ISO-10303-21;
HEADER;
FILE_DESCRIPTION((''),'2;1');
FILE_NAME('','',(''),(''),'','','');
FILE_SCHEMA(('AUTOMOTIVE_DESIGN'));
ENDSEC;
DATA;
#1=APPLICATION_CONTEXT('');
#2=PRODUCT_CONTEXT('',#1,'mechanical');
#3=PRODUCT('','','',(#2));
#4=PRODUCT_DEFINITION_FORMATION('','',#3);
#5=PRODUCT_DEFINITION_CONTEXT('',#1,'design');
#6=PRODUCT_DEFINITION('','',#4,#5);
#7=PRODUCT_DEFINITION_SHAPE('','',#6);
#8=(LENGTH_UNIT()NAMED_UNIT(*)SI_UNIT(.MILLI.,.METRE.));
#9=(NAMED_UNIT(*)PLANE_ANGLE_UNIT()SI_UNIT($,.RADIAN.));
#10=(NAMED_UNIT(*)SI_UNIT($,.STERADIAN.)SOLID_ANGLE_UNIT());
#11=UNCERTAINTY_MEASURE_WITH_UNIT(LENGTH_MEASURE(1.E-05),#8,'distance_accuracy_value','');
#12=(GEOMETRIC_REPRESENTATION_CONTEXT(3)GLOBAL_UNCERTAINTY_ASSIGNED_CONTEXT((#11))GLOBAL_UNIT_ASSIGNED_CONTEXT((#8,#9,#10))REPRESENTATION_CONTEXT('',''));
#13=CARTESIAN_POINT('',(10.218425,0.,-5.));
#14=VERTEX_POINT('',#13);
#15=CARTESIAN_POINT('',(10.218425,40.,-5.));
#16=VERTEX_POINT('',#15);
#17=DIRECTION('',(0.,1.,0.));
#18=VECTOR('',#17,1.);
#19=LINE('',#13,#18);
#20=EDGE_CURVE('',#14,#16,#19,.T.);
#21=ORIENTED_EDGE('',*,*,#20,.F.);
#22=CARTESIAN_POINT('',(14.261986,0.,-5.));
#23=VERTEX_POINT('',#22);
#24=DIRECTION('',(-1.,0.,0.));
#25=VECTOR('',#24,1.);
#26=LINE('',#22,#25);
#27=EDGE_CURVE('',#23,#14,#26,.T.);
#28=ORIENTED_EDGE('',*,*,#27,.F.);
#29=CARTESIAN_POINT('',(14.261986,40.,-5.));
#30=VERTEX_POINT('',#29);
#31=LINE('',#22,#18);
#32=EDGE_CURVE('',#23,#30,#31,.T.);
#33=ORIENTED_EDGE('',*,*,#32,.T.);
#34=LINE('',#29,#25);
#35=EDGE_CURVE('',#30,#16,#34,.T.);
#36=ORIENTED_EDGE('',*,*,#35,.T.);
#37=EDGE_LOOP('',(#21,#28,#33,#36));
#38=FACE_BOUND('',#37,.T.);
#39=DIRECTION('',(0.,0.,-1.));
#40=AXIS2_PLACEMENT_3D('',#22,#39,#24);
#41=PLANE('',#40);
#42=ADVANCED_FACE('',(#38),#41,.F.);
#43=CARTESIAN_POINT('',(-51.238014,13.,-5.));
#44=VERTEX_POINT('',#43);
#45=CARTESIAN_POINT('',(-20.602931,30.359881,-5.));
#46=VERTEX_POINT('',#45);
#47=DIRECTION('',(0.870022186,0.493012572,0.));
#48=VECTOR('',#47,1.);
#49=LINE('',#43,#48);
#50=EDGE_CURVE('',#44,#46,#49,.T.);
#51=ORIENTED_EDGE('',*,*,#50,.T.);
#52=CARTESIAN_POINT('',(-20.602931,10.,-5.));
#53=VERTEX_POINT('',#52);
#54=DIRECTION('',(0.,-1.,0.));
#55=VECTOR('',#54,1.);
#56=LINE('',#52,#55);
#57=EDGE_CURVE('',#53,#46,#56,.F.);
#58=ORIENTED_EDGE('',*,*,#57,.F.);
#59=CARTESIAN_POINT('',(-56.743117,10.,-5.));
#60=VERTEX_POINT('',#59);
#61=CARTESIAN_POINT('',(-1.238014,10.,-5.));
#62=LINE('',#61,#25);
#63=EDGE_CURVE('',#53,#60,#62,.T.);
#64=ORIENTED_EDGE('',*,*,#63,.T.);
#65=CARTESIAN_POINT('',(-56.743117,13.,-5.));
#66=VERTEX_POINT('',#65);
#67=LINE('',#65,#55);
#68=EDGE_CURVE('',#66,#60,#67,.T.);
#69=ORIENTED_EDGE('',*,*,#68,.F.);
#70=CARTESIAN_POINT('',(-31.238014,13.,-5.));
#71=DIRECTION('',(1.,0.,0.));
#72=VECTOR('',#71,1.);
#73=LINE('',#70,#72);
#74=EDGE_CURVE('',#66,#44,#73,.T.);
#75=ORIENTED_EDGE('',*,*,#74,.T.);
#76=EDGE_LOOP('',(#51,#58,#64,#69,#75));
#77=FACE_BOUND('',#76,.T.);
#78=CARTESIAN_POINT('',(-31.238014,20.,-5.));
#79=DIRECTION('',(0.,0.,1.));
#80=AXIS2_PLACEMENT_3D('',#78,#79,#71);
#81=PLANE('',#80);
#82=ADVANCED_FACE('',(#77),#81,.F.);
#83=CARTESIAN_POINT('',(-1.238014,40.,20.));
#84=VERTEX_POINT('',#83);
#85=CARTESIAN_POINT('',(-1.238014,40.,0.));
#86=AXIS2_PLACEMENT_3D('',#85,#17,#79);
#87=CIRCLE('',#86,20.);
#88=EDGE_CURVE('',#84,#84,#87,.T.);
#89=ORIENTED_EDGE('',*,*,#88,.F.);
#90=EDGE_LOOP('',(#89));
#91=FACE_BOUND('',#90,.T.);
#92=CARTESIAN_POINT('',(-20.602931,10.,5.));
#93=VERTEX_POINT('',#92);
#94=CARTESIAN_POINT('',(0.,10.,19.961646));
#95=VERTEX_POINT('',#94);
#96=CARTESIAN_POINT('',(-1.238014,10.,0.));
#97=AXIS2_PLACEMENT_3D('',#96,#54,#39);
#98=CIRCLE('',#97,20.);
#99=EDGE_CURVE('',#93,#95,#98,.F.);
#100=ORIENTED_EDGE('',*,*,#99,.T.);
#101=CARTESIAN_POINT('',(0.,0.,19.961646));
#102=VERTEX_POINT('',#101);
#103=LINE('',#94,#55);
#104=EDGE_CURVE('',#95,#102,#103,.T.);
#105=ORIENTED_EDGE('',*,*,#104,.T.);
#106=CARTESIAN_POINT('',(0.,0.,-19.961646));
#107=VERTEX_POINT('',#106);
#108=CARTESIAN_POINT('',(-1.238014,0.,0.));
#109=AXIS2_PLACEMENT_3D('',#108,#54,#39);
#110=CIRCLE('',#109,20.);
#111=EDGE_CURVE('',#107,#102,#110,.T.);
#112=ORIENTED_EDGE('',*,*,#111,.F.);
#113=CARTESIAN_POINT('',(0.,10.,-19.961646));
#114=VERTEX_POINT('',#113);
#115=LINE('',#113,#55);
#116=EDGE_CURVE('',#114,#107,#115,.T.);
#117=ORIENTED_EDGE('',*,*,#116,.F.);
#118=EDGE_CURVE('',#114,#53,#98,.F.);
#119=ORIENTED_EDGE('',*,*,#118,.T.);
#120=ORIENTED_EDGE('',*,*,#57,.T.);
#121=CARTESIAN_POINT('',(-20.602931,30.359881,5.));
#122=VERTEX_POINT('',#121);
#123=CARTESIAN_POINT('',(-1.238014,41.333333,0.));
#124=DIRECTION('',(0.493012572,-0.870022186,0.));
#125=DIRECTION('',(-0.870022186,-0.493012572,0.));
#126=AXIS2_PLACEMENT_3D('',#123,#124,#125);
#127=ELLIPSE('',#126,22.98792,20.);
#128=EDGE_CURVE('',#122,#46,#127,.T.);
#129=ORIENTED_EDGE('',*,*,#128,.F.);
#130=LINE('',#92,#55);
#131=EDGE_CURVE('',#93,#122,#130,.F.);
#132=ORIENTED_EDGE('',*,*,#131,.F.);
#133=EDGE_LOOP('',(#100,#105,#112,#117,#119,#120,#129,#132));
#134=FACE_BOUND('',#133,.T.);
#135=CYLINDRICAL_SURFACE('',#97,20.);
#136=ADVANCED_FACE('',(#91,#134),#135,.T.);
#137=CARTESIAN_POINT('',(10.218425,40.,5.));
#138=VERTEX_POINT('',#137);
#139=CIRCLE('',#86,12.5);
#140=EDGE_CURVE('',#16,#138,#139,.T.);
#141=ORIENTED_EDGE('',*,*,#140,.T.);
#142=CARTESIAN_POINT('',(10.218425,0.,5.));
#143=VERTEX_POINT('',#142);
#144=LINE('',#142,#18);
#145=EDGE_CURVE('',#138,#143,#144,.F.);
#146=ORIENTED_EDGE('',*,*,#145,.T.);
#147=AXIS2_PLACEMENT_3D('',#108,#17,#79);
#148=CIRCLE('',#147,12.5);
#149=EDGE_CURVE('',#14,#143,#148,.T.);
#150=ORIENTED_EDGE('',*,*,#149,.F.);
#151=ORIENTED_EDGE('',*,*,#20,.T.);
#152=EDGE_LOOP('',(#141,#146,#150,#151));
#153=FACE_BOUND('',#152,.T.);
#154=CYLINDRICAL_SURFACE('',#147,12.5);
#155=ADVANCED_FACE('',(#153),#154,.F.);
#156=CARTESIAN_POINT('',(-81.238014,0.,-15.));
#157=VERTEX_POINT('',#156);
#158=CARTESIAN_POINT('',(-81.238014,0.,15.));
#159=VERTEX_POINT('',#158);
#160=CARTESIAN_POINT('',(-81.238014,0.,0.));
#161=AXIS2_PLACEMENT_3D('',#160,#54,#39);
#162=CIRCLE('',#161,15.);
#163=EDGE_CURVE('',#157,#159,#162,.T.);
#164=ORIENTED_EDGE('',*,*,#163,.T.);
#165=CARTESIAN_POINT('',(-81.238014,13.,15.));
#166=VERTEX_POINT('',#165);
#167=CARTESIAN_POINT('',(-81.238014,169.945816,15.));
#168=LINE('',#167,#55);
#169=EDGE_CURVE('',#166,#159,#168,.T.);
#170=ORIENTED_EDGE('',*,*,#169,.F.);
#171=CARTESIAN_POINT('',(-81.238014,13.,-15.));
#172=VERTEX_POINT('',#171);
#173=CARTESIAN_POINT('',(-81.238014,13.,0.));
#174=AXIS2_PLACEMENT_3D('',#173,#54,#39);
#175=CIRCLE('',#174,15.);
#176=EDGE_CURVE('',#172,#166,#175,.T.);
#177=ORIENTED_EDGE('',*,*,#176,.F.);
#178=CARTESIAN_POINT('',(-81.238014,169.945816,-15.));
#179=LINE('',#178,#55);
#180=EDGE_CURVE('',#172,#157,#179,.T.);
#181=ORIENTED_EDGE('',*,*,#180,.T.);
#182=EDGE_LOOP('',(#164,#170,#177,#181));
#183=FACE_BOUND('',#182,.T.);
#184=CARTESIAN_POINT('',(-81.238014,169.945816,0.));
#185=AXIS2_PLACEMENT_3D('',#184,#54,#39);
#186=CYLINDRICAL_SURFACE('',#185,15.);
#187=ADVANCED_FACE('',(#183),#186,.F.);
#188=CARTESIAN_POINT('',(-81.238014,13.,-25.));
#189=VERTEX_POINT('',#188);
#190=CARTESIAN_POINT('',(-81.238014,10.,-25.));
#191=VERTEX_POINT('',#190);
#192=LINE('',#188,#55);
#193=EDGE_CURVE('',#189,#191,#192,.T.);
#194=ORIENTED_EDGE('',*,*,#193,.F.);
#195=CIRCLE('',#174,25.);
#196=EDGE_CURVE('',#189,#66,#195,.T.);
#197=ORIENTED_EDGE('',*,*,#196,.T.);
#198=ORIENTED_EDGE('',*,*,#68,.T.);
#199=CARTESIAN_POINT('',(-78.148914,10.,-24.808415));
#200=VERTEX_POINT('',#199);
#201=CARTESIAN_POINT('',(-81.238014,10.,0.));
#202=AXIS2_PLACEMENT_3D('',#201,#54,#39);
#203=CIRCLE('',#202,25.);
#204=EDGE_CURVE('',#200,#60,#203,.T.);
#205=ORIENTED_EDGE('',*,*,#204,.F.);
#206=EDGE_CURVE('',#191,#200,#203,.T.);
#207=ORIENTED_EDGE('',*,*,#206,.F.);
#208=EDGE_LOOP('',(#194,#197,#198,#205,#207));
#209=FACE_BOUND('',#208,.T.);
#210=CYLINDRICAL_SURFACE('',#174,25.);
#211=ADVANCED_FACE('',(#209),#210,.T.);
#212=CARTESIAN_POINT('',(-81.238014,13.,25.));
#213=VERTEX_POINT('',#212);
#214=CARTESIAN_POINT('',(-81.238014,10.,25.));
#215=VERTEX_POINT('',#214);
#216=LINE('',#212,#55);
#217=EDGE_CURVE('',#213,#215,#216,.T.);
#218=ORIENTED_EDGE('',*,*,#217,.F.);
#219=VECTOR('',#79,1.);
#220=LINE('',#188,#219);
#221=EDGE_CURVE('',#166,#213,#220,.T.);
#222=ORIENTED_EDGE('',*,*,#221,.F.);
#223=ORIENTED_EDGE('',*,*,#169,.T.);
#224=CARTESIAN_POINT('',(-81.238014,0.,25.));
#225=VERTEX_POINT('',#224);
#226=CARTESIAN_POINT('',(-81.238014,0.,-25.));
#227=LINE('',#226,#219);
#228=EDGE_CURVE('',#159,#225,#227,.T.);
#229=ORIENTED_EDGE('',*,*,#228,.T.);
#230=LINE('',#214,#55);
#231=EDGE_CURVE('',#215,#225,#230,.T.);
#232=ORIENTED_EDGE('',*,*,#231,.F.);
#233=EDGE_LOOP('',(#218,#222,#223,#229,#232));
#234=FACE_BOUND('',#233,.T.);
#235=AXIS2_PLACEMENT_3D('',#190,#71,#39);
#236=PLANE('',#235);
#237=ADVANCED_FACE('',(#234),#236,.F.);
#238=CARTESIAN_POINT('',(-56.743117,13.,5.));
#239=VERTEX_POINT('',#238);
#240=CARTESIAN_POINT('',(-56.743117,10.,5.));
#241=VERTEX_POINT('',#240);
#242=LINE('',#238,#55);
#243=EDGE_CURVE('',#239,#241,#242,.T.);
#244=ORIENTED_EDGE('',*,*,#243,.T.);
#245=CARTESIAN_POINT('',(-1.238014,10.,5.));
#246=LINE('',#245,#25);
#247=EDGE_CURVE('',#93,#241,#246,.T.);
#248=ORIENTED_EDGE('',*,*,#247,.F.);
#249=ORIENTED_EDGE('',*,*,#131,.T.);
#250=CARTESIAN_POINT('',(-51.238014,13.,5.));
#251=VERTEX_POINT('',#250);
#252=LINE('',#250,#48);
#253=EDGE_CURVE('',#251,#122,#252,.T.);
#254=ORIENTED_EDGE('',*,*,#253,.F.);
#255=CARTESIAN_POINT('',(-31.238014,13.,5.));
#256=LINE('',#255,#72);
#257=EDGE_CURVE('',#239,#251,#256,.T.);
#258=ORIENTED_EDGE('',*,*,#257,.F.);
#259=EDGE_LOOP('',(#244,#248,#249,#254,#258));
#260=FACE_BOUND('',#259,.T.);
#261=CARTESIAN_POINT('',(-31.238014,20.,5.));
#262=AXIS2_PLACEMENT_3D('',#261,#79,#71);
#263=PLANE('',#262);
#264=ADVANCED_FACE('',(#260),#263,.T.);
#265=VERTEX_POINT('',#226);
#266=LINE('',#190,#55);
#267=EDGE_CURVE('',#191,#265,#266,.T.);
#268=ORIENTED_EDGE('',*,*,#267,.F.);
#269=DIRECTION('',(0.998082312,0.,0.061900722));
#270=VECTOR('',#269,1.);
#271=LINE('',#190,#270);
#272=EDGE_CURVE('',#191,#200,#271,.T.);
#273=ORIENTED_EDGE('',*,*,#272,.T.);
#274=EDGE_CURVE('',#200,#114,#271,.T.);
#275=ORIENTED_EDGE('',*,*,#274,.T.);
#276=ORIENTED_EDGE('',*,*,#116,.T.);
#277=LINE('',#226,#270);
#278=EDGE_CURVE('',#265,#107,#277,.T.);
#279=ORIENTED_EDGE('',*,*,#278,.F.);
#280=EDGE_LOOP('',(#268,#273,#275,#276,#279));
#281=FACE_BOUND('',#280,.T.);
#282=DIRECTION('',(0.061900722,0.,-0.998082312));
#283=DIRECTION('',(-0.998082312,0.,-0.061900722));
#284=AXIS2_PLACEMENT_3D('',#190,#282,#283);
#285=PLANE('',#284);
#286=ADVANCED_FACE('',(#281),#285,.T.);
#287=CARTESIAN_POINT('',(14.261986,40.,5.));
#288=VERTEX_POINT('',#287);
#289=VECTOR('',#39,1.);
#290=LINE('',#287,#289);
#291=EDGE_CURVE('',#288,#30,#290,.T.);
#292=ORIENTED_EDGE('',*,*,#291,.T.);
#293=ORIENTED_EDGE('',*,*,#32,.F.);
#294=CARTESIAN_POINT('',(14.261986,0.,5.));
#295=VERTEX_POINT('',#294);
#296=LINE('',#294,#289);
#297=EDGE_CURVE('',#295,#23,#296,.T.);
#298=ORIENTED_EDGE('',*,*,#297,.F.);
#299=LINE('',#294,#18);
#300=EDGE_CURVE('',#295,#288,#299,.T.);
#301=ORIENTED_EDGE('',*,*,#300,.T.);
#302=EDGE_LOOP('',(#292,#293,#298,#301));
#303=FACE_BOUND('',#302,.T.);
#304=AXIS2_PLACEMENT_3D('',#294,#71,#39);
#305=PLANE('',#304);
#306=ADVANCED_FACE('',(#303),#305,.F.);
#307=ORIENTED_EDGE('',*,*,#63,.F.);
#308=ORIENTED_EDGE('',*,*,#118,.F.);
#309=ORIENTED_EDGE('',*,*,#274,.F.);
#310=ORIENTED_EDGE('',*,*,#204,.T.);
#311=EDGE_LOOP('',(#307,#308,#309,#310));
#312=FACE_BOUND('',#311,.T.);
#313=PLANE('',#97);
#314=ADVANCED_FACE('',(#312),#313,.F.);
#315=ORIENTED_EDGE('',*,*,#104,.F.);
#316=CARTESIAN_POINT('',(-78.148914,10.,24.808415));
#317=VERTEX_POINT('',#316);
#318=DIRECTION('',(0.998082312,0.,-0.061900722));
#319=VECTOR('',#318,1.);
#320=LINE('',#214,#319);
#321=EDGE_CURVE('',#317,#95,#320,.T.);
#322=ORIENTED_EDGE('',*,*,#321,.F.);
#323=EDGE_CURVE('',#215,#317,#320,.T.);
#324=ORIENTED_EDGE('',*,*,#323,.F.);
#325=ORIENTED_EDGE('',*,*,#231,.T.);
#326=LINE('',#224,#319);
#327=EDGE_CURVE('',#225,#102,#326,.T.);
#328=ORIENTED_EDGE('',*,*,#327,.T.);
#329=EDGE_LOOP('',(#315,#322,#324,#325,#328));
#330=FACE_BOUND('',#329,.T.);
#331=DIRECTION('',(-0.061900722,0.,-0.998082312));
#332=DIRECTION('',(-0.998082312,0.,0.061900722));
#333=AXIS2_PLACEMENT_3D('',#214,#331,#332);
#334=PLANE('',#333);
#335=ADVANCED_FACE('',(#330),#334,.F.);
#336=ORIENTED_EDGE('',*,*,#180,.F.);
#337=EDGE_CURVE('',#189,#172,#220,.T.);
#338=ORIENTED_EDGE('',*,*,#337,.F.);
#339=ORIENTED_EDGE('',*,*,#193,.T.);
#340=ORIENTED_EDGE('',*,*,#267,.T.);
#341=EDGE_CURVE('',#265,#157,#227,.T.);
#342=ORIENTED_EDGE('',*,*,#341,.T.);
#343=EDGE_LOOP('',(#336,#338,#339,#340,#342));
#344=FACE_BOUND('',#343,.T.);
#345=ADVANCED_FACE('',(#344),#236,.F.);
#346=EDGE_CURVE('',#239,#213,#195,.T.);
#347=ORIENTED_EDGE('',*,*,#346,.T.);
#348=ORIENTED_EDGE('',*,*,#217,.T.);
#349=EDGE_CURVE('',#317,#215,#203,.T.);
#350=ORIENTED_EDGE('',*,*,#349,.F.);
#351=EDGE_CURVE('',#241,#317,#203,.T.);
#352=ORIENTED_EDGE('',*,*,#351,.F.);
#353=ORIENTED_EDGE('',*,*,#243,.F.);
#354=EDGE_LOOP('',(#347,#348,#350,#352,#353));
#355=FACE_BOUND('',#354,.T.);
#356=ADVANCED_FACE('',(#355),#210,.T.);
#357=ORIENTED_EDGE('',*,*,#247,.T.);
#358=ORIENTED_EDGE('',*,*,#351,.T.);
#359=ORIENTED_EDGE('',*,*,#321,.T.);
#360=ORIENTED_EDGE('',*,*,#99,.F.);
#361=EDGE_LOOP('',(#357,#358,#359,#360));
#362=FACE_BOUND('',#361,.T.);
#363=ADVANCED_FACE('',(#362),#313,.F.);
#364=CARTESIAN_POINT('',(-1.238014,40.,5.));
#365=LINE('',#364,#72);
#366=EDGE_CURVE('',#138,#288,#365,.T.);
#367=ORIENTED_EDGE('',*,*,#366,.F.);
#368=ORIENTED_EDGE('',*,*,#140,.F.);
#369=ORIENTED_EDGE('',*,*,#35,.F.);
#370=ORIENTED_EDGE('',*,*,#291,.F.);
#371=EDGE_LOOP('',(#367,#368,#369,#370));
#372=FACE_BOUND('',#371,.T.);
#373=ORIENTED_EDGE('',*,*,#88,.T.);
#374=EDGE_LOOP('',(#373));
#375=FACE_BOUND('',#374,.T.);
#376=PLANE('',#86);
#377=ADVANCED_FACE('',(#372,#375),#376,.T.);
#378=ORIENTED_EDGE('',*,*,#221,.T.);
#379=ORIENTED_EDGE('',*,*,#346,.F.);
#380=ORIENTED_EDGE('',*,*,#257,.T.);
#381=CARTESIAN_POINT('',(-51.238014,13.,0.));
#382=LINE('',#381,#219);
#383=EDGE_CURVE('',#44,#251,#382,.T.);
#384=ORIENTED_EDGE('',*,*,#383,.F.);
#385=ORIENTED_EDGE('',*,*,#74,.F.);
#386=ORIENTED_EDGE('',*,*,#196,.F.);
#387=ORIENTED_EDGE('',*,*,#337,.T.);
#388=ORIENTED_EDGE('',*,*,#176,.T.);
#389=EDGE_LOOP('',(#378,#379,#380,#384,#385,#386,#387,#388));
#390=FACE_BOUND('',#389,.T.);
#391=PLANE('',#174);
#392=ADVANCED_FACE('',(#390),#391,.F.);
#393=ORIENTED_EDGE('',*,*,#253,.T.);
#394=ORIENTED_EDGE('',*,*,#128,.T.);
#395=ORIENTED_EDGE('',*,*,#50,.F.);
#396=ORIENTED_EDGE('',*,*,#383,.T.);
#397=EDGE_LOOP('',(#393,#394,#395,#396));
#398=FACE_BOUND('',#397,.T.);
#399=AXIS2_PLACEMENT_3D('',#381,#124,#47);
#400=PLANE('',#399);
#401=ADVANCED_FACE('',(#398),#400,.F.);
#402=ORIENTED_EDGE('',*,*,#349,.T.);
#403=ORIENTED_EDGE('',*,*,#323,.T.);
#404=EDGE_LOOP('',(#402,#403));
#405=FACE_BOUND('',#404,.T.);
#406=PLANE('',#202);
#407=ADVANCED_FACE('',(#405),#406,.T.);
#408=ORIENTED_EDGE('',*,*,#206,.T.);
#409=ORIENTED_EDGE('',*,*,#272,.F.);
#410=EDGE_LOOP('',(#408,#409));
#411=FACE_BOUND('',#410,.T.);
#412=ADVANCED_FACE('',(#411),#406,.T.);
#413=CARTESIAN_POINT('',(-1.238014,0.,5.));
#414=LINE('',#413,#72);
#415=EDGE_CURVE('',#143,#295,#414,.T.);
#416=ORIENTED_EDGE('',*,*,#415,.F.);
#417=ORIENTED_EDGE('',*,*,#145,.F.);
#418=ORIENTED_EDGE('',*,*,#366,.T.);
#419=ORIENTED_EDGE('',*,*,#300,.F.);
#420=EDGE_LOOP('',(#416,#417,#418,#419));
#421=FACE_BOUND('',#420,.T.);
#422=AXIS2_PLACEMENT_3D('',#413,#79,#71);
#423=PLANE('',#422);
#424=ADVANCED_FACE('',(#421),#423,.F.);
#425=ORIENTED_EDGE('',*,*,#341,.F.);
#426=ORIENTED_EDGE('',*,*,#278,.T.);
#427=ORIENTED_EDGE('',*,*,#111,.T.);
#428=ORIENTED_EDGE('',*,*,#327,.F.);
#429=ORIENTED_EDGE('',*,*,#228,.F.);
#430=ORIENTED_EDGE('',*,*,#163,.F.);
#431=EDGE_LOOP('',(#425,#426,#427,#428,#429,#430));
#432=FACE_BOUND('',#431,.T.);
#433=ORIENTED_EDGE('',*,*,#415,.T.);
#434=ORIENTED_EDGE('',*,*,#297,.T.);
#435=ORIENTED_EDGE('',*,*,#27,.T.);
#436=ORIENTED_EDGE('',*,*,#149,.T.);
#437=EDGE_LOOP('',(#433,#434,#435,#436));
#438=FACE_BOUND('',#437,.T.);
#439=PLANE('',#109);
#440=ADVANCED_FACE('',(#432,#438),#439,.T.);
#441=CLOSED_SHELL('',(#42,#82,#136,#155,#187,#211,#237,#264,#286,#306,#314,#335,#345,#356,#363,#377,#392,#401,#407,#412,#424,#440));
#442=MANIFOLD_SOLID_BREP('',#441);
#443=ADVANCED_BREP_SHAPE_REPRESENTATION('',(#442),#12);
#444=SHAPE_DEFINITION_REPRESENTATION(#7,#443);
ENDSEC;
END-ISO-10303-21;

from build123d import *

# Parameters (mm, degrees)
EXTRUDE_3_DEPTH          = 10
EXTRUDE_7_DEPTH          = 3
CUT_EXTRUDE_3_DEPTH      = 86.986132552
CUT_EXTRUDE_3_DEPTH_BACK = 86.986132552
SKETCH_7_R               = 20
EXTRUDE_8_DEPTH          = 30
RIB_START                = -5
RIB_1_DEPTH              = 10
SKETCH_10_R              = 12.5
CUT_EXTRUDE_4_DEPTH      = 94.939421923
SKETCH_11_W              = 15.5
SKETCH_11_H              = 10
CUT_EXTRUDE_5_DEPTH      = 94.939421923


# Read off the part's stored shape, not the designer's step: 筋1
with BuildPart() as part:
    # 草图1 → 凸台-拉伸3 (new body)
    with BuildSketch(Plane(origin=(0, 0, 0), x_dir=(1, 0, 0), z_dir=(0, 1, 0))):
        with BuildLine():
            Line((-81.238014447, 25), (-81.238014447, -25))
            Line((-81.238014447, -25), (0, -19.96164623))
            ThreePointArc((0, -19.96164623), (18.761985553, 0), (0, 19.96164623))
            Line((0, 19.96164623), (-81.238014447, 25))
        make_face()
    extrude(amount=EXTRUDE_3_DEPTH)

    # 草图2 → 凸台-拉伸7 (add)
    with BuildSketch(Plane(origin=(0, 10, 0), x_dir=(1, 0, 0), z_dir=(0, 1, 0))):
        with BuildLine():
            Line((-81.238014447, 25), (-81.238014447, -25))
            ThreePointArc((-81.238014447, -25), (-56.238014447, 0), (-81.238014447, 25))
        make_face()
    extrude(amount=EXTRUDE_7_DEPTH)

    # 草图5 → 切除-拉伸3 (cut, two sides: drawn at the far end of the back side and taken through both)
    with BuildSketch(Plane(origin=(0, 13, 0), x_dir=(1, 0, 0), z_dir=(0, 1, 0)).offset(-CUT_EXTRUDE_3_DEPTH_BACK)):
        with BuildLine():
            Line((-306.644606732, 15), (-81.238014447, 15))
            ThreePointArc((-81.238014447, 15), (-66.238014447, 0), (-81.238014447, -15))
            Line((-81.238014447, -15), (-306.644606732, -15))
            Line((-306.644606732, -15), (-757.457791303, -15))
            Line((-757.457791303, -15), (-757.457791303, 15))
            Line((-757.457791303, 15), (-306.644606732, 15))
        make_face()
    extrude(amount=CUT_EXTRUDE_3_DEPTH + CUT_EXTRUDE_3_DEPTH_BACK, mode=Mode.SUBTRACT)

    # 草图7 → 凸台-拉伸8 (add)
    with BuildSketch(Plane(origin=(0, 10, 0), x_dir=(1, 0, 0), z_dir=(0, 1, 0))):
        with Locations(Location((-1.238014447, 0, 0), (0, 0, 86.451080997))):
            Circle(SKETCH_7_R)
    extrude(amount=EXTRUDE_8_DEPTH)

    # 筋1 outline → 筋1 (add)
    with BuildSketch(Plane.XY.offset(RIB_START)):
        Polygon((-51.238014447, 13), (-58, 13), (-58, 10), (-19, 10), (-19, 31.268208187), (-20.602931178, 30.359880519), align=None)
    extrude(amount=RIB_1_DEPTH)

    # 草图10 → 切除-拉伸4 (cut, through all)
    with BuildSketch(Plane(origin=(0, 40, 0), x_dir=(1, 0, 0), z_dir=(0, 1, 0))):
        with Locations(Location((-1.238014447, 0, 0), (0, 0, 270))):
            Circle(SKETCH_10_R)
    extrude(amount=-CUT_EXTRUDE_4_DEPTH, mode=Mode.SUBTRACT)

    # 草图11 → 切除-拉伸5 (cut, through all)
    with BuildSketch(Plane(origin=(0, 40, 0), x_dir=(1, 0, 0), z_dir=(0, 1, 0))):
        with Locations((6.511985553, 0)):
            Rectangle(SKETCH_11_W, SKETCH_11_H)
    extrude(amount=-CUT_EXTRUDE_5_DEPTH, mode=Mode.SUBTRACT)


solid = part.part
